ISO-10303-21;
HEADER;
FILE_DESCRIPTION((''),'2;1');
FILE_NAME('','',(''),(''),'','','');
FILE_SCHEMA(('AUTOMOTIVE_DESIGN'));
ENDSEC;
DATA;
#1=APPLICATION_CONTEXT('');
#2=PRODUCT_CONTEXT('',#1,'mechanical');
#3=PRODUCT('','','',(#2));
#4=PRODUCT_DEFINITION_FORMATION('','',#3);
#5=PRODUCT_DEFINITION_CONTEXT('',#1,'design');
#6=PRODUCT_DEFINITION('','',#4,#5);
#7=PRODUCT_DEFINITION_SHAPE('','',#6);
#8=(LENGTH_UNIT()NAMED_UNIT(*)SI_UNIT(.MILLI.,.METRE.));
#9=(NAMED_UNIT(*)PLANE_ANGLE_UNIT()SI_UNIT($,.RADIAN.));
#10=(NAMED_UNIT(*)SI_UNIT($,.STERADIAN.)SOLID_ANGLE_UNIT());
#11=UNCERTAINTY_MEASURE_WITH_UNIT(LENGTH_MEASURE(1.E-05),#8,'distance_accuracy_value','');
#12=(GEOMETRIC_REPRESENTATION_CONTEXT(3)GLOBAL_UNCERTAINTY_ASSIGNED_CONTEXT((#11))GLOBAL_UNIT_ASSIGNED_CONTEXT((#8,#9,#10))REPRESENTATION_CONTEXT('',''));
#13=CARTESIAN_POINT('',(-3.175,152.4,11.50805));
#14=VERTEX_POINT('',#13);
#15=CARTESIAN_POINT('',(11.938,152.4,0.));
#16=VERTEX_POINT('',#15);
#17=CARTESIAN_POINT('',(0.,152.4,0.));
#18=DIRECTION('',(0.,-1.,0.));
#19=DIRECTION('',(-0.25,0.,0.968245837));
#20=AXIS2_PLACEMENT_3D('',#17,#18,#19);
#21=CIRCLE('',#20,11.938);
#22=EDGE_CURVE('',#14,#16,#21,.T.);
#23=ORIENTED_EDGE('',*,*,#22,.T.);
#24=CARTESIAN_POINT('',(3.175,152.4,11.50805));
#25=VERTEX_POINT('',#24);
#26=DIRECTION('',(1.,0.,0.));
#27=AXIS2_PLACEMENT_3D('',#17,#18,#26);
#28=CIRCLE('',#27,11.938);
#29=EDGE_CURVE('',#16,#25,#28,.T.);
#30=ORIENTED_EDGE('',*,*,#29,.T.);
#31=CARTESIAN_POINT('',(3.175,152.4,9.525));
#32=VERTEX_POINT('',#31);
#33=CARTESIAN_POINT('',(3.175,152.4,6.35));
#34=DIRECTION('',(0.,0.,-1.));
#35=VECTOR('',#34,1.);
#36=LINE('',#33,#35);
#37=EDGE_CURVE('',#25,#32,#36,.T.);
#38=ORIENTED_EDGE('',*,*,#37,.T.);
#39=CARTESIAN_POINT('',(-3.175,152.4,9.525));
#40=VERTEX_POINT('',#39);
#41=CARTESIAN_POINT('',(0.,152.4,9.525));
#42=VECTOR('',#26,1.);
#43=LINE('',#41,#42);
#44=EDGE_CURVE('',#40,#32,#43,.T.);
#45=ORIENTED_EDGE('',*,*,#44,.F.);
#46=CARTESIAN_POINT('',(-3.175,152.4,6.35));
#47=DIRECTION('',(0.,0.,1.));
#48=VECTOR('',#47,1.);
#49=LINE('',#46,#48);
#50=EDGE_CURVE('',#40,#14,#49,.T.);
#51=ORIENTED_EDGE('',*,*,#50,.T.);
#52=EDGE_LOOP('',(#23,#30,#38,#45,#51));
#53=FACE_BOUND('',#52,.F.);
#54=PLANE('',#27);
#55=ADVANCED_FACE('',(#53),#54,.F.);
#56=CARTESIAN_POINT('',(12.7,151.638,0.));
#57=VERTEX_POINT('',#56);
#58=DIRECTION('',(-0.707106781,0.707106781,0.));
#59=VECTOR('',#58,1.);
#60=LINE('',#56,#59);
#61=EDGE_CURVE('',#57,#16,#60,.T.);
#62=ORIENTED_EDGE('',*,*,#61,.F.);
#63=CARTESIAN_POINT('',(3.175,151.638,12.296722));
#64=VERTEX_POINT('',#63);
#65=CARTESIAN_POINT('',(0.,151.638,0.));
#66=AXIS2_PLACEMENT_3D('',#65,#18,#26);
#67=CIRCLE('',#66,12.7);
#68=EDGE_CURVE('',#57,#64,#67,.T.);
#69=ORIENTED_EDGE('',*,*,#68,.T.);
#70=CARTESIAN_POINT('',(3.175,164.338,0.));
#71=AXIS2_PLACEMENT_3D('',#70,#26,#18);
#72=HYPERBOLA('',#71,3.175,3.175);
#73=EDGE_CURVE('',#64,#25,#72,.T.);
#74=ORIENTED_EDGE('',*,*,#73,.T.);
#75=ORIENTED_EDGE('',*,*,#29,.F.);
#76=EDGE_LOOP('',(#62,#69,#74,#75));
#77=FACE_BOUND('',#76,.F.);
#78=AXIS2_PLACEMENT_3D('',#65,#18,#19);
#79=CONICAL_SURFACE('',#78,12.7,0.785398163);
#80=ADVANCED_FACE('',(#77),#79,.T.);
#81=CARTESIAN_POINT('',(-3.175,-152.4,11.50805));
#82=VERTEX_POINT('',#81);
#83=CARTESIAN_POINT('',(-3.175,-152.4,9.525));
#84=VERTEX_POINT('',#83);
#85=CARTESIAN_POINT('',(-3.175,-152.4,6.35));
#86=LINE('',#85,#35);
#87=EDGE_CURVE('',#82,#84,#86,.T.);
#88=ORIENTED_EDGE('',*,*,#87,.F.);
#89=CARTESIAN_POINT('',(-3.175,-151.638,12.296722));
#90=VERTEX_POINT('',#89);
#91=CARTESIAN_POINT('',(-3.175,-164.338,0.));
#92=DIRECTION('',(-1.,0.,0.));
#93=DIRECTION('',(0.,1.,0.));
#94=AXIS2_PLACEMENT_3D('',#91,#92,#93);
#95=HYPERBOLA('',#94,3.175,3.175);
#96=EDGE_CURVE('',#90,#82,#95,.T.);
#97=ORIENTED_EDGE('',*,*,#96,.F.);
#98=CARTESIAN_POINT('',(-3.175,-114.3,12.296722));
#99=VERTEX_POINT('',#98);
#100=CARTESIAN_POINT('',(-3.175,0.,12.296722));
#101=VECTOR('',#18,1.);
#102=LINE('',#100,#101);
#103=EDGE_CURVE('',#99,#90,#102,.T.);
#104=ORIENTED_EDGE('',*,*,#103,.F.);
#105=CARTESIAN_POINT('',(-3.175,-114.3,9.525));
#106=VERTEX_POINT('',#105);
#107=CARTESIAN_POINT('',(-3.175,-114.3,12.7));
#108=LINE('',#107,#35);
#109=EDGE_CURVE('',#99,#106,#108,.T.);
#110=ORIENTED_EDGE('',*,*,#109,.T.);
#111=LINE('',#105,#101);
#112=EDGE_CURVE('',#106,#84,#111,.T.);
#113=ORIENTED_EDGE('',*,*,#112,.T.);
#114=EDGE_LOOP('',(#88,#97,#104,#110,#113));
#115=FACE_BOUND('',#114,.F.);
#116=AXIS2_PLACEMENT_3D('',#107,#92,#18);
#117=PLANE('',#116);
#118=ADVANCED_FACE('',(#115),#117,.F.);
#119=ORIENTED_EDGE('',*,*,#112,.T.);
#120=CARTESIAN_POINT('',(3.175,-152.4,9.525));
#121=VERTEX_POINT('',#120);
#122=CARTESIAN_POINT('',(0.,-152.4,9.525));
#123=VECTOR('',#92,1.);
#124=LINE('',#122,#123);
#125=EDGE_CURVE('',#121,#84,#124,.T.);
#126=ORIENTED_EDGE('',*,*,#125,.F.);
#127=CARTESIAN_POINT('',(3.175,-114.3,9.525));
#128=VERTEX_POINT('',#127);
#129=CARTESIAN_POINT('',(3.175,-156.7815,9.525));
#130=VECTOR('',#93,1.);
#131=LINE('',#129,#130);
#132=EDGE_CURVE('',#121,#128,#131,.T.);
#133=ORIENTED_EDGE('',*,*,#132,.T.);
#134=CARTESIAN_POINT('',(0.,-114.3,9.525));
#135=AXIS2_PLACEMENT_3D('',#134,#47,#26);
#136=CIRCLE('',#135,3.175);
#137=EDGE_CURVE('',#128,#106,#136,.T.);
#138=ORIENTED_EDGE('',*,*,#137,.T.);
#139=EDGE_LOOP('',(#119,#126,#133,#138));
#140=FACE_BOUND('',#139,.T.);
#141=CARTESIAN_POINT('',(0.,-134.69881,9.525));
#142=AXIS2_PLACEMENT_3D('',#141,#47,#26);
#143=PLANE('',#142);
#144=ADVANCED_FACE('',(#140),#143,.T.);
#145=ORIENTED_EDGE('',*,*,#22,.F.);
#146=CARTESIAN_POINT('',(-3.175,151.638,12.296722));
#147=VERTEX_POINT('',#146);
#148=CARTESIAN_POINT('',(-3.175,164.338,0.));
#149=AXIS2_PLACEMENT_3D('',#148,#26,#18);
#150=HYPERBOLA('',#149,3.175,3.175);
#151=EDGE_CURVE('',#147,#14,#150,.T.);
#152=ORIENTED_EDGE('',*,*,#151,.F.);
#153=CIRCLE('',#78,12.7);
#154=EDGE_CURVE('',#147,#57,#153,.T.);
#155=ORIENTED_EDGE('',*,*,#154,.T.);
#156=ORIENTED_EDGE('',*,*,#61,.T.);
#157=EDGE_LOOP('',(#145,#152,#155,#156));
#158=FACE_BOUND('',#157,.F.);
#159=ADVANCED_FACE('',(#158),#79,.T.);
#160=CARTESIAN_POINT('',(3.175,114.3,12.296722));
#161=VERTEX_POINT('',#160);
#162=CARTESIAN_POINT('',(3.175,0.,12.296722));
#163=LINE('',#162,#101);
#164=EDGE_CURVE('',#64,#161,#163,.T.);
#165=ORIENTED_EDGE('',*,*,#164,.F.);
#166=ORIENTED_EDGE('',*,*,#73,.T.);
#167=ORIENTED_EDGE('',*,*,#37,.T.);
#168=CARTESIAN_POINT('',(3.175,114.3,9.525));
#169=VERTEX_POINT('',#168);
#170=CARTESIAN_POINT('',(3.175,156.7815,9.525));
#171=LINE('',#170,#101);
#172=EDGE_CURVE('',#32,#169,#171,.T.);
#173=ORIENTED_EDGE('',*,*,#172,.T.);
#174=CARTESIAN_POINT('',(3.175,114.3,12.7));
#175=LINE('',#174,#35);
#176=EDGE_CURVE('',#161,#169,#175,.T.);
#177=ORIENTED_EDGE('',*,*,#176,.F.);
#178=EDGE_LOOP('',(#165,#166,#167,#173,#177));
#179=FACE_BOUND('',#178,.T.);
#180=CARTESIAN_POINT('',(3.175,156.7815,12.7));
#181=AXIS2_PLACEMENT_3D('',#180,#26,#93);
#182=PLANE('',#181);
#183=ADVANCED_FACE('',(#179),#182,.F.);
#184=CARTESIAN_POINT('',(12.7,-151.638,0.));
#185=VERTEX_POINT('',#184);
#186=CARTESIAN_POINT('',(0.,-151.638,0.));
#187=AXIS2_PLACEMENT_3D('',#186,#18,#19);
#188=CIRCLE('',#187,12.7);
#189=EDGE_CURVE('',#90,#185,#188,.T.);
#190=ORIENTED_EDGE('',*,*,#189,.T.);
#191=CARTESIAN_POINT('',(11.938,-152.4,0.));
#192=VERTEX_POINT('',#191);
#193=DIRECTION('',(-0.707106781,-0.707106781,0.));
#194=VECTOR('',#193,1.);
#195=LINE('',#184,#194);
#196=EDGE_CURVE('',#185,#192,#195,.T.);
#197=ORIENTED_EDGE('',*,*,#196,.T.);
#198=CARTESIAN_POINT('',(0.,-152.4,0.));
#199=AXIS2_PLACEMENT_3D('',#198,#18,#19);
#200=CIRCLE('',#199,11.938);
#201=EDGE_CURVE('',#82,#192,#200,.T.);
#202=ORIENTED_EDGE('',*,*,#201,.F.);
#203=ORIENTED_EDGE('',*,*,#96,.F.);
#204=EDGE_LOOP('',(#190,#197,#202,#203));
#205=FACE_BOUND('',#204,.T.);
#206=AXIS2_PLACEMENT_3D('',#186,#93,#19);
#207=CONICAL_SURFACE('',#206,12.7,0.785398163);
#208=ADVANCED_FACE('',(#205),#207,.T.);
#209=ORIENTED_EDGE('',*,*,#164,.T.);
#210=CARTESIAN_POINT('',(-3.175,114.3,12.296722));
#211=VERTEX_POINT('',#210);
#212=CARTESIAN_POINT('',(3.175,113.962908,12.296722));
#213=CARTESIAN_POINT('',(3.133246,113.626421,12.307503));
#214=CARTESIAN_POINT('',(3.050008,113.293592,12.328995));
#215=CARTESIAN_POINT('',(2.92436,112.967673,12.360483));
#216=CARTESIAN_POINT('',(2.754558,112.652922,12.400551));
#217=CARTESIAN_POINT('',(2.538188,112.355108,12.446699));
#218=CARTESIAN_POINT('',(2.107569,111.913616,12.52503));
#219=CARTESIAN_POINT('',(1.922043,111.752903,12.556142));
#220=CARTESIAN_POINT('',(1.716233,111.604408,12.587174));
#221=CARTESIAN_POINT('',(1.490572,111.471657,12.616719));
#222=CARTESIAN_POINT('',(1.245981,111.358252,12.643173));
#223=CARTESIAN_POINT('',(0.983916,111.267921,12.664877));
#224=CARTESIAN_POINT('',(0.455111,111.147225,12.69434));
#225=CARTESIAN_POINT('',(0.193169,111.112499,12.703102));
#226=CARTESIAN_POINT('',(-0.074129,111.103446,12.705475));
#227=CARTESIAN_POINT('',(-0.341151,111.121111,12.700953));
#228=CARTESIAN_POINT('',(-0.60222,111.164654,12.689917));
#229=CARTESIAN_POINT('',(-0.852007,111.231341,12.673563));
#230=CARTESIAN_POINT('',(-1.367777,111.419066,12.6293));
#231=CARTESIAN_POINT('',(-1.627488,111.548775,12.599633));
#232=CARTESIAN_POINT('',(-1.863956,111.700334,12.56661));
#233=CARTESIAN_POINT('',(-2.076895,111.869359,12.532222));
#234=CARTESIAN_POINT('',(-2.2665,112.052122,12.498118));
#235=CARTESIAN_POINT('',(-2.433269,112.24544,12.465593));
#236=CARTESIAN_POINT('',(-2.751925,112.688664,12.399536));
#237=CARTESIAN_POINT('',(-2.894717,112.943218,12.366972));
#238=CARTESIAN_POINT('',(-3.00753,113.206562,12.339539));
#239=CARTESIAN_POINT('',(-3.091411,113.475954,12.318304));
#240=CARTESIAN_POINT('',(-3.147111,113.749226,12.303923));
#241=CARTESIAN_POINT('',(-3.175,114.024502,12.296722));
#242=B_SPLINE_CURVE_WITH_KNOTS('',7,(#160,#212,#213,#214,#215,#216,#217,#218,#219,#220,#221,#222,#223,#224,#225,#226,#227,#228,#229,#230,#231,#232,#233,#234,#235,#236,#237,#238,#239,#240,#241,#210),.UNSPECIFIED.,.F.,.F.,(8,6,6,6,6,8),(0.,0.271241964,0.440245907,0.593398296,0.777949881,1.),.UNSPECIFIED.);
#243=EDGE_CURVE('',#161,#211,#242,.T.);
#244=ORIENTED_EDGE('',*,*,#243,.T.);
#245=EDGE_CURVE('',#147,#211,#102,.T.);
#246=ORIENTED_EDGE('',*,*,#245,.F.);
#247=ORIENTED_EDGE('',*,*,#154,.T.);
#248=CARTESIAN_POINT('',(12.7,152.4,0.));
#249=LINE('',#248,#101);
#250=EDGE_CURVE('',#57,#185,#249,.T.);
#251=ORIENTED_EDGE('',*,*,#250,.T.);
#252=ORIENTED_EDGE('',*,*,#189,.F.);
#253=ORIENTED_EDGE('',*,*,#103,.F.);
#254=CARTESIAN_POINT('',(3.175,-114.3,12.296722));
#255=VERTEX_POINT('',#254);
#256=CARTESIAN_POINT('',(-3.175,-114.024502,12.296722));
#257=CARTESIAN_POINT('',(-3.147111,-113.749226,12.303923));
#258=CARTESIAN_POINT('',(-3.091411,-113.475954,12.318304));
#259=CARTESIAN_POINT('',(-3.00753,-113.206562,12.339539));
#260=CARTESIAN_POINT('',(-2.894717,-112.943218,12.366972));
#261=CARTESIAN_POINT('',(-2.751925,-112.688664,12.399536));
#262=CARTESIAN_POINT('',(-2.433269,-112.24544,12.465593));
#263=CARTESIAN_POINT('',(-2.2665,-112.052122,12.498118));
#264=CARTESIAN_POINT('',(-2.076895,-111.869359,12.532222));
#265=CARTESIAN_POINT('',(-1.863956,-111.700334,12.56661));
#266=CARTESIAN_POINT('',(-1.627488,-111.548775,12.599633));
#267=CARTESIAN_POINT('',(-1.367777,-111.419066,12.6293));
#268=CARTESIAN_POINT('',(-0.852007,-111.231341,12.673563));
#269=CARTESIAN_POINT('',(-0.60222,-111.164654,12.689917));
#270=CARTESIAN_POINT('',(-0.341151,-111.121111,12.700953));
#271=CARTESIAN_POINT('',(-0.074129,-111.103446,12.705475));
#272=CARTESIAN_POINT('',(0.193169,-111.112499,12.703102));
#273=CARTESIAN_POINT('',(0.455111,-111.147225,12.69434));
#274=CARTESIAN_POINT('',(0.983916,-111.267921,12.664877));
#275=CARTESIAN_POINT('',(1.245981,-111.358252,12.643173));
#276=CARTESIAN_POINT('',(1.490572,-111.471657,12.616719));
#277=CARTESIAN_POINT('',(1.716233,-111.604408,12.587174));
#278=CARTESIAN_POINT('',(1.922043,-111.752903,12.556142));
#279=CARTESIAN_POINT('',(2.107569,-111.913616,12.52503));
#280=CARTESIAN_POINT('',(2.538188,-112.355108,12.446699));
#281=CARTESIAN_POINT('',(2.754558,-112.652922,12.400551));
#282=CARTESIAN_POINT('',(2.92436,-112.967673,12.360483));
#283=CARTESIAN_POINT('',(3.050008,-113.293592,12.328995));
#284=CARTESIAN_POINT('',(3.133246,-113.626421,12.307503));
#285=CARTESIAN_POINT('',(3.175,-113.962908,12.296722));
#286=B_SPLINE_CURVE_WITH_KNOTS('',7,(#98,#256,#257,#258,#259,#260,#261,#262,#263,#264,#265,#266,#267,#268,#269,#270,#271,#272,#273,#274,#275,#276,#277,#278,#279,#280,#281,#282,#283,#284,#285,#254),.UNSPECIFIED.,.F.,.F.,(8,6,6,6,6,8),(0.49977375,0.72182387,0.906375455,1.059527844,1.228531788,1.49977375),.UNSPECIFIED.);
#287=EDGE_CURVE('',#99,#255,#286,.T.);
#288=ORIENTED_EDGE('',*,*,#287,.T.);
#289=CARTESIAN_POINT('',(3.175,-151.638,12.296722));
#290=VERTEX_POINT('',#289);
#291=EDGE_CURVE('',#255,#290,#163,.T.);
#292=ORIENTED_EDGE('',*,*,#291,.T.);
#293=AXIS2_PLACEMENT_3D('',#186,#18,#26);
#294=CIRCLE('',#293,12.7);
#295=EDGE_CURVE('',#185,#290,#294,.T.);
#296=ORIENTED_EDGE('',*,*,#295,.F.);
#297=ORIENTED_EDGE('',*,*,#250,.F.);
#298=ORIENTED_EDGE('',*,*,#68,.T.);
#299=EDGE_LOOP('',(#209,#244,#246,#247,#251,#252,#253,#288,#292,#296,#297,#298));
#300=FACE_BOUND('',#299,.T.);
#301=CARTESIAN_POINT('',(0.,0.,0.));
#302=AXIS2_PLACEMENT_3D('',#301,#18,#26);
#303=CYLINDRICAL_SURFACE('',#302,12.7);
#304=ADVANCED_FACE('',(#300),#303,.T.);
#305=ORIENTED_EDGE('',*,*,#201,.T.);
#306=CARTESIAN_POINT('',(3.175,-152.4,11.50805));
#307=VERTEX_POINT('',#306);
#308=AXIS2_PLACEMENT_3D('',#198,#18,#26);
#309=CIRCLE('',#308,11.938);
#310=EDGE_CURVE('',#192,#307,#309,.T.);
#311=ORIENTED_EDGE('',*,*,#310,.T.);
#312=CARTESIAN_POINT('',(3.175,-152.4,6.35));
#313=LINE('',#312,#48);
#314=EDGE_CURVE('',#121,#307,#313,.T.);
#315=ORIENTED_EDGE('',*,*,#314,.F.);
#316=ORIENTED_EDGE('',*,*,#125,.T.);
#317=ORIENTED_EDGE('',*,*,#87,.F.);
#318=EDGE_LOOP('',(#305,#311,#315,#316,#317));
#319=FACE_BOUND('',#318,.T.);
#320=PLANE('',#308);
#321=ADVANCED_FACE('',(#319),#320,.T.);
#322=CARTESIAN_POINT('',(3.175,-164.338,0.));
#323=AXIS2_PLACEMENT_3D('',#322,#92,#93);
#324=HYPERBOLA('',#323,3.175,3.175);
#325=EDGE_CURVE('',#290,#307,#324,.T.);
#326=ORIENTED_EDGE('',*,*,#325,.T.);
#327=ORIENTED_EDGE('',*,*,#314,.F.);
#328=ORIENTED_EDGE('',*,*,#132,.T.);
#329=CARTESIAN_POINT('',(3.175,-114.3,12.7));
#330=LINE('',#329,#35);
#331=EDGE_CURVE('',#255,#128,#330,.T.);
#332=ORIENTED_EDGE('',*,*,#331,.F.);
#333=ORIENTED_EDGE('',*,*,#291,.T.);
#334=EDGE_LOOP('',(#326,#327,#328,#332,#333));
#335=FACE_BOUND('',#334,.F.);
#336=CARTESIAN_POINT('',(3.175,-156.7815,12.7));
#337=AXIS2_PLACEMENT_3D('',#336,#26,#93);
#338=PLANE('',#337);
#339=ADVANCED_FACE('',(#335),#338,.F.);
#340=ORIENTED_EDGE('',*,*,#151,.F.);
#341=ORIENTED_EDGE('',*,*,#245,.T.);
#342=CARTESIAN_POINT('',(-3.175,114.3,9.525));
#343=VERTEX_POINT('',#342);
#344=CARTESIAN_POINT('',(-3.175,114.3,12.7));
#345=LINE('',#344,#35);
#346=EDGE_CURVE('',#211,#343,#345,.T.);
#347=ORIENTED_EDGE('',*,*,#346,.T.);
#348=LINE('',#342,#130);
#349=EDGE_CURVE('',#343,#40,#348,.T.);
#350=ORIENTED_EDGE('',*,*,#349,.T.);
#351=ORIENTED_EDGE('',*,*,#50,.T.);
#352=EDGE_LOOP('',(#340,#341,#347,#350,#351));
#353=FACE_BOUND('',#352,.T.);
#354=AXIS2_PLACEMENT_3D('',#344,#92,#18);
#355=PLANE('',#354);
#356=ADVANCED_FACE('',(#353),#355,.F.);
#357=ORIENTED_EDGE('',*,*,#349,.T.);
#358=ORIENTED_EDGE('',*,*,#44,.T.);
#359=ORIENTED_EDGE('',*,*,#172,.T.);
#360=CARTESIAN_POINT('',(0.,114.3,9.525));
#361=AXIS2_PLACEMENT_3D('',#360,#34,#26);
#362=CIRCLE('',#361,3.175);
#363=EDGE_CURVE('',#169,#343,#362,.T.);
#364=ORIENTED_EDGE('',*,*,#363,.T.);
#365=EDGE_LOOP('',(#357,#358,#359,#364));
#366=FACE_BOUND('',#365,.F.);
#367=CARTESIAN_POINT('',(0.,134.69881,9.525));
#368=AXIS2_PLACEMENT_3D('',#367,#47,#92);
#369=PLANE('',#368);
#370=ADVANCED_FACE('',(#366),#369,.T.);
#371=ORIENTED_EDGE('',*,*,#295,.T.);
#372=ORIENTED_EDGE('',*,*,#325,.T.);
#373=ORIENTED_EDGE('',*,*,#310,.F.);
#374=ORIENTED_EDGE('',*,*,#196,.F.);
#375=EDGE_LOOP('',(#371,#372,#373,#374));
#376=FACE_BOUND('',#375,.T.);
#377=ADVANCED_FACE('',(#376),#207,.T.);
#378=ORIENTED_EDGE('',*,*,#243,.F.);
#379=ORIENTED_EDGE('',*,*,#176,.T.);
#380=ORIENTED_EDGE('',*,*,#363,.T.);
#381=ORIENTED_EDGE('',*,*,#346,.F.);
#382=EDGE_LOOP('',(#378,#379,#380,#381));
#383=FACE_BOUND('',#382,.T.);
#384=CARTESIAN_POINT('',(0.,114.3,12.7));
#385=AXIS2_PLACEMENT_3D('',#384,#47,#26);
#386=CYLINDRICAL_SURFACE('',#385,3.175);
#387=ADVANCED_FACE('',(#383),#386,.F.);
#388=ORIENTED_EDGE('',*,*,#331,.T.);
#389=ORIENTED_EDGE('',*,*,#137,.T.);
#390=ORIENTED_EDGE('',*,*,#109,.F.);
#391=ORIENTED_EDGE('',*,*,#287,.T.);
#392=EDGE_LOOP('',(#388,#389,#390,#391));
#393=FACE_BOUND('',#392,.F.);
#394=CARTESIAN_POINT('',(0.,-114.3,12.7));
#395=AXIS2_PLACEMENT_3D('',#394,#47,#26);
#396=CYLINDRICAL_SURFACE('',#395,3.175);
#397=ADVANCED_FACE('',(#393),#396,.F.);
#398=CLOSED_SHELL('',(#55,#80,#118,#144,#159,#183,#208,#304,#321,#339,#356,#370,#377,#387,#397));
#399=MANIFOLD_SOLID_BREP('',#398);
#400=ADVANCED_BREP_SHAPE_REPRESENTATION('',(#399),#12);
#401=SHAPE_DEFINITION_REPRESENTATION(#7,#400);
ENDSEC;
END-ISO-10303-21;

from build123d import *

# Parameters (mm, degrees)
F0_R     = 12.7
F1_DEPTH = 152.4
F4_DEPTH = 3.175
F5_SIZE  = 0.762
F6_SIZE  = 0.762


# Not quite as in the source:
# - a pattern or mirror of a feature is missing from the dataset's text; its kind, count and spacing are read off the source's solid


with BuildPart() as f1:
    # F0 (on Front) → F1 (new body, symmetric)
    with BuildSketch(Plane.XZ):
        Circle(F0_R)
    extrude(amount=F1_DEPTH, both=True)

    # F3 (on offset) → F4 (cut)
    with BuildSketch(Plane.XY.offset(12.7)):
        with BuildLine():
            Line((3.175, -156.7815), (3.175, -114.3))
            ThreePointArc((3.175, -114.3), (0, -111.125), (-3.175, -114.3))
            Line((-3.175, -114.3), (-3.175, -156.7815))
            Line((-3.175, -156.7815), (3.175, -156.7815))
        make_face()
    f4 = extrude(amount=-F4_DEPTH, mode=Mode.SUBTRACT)

    # F4_copies: F4 across plane
    add(f4.mirror(Plane.ZX), mode=Mode.SUBTRACT)

    # F5
    f5_edges = [f1.edges().sort_by_distance(p)[0] for p in [
        (-7.77713, -152.4, -10.040232),
    ]]
    chamfer(f5_edges, length=F5_SIZE)

    # F6
    f6_edges = [f1.edges().sort_by_distance(p)[0] for p in [
        (-7.77713, 152.4, -10.040232),
        (10.040232, 152.4, 7.77713),
    ]]
    chamfer(f6_edges, length=F6_SIZE)


solid = f1.part
